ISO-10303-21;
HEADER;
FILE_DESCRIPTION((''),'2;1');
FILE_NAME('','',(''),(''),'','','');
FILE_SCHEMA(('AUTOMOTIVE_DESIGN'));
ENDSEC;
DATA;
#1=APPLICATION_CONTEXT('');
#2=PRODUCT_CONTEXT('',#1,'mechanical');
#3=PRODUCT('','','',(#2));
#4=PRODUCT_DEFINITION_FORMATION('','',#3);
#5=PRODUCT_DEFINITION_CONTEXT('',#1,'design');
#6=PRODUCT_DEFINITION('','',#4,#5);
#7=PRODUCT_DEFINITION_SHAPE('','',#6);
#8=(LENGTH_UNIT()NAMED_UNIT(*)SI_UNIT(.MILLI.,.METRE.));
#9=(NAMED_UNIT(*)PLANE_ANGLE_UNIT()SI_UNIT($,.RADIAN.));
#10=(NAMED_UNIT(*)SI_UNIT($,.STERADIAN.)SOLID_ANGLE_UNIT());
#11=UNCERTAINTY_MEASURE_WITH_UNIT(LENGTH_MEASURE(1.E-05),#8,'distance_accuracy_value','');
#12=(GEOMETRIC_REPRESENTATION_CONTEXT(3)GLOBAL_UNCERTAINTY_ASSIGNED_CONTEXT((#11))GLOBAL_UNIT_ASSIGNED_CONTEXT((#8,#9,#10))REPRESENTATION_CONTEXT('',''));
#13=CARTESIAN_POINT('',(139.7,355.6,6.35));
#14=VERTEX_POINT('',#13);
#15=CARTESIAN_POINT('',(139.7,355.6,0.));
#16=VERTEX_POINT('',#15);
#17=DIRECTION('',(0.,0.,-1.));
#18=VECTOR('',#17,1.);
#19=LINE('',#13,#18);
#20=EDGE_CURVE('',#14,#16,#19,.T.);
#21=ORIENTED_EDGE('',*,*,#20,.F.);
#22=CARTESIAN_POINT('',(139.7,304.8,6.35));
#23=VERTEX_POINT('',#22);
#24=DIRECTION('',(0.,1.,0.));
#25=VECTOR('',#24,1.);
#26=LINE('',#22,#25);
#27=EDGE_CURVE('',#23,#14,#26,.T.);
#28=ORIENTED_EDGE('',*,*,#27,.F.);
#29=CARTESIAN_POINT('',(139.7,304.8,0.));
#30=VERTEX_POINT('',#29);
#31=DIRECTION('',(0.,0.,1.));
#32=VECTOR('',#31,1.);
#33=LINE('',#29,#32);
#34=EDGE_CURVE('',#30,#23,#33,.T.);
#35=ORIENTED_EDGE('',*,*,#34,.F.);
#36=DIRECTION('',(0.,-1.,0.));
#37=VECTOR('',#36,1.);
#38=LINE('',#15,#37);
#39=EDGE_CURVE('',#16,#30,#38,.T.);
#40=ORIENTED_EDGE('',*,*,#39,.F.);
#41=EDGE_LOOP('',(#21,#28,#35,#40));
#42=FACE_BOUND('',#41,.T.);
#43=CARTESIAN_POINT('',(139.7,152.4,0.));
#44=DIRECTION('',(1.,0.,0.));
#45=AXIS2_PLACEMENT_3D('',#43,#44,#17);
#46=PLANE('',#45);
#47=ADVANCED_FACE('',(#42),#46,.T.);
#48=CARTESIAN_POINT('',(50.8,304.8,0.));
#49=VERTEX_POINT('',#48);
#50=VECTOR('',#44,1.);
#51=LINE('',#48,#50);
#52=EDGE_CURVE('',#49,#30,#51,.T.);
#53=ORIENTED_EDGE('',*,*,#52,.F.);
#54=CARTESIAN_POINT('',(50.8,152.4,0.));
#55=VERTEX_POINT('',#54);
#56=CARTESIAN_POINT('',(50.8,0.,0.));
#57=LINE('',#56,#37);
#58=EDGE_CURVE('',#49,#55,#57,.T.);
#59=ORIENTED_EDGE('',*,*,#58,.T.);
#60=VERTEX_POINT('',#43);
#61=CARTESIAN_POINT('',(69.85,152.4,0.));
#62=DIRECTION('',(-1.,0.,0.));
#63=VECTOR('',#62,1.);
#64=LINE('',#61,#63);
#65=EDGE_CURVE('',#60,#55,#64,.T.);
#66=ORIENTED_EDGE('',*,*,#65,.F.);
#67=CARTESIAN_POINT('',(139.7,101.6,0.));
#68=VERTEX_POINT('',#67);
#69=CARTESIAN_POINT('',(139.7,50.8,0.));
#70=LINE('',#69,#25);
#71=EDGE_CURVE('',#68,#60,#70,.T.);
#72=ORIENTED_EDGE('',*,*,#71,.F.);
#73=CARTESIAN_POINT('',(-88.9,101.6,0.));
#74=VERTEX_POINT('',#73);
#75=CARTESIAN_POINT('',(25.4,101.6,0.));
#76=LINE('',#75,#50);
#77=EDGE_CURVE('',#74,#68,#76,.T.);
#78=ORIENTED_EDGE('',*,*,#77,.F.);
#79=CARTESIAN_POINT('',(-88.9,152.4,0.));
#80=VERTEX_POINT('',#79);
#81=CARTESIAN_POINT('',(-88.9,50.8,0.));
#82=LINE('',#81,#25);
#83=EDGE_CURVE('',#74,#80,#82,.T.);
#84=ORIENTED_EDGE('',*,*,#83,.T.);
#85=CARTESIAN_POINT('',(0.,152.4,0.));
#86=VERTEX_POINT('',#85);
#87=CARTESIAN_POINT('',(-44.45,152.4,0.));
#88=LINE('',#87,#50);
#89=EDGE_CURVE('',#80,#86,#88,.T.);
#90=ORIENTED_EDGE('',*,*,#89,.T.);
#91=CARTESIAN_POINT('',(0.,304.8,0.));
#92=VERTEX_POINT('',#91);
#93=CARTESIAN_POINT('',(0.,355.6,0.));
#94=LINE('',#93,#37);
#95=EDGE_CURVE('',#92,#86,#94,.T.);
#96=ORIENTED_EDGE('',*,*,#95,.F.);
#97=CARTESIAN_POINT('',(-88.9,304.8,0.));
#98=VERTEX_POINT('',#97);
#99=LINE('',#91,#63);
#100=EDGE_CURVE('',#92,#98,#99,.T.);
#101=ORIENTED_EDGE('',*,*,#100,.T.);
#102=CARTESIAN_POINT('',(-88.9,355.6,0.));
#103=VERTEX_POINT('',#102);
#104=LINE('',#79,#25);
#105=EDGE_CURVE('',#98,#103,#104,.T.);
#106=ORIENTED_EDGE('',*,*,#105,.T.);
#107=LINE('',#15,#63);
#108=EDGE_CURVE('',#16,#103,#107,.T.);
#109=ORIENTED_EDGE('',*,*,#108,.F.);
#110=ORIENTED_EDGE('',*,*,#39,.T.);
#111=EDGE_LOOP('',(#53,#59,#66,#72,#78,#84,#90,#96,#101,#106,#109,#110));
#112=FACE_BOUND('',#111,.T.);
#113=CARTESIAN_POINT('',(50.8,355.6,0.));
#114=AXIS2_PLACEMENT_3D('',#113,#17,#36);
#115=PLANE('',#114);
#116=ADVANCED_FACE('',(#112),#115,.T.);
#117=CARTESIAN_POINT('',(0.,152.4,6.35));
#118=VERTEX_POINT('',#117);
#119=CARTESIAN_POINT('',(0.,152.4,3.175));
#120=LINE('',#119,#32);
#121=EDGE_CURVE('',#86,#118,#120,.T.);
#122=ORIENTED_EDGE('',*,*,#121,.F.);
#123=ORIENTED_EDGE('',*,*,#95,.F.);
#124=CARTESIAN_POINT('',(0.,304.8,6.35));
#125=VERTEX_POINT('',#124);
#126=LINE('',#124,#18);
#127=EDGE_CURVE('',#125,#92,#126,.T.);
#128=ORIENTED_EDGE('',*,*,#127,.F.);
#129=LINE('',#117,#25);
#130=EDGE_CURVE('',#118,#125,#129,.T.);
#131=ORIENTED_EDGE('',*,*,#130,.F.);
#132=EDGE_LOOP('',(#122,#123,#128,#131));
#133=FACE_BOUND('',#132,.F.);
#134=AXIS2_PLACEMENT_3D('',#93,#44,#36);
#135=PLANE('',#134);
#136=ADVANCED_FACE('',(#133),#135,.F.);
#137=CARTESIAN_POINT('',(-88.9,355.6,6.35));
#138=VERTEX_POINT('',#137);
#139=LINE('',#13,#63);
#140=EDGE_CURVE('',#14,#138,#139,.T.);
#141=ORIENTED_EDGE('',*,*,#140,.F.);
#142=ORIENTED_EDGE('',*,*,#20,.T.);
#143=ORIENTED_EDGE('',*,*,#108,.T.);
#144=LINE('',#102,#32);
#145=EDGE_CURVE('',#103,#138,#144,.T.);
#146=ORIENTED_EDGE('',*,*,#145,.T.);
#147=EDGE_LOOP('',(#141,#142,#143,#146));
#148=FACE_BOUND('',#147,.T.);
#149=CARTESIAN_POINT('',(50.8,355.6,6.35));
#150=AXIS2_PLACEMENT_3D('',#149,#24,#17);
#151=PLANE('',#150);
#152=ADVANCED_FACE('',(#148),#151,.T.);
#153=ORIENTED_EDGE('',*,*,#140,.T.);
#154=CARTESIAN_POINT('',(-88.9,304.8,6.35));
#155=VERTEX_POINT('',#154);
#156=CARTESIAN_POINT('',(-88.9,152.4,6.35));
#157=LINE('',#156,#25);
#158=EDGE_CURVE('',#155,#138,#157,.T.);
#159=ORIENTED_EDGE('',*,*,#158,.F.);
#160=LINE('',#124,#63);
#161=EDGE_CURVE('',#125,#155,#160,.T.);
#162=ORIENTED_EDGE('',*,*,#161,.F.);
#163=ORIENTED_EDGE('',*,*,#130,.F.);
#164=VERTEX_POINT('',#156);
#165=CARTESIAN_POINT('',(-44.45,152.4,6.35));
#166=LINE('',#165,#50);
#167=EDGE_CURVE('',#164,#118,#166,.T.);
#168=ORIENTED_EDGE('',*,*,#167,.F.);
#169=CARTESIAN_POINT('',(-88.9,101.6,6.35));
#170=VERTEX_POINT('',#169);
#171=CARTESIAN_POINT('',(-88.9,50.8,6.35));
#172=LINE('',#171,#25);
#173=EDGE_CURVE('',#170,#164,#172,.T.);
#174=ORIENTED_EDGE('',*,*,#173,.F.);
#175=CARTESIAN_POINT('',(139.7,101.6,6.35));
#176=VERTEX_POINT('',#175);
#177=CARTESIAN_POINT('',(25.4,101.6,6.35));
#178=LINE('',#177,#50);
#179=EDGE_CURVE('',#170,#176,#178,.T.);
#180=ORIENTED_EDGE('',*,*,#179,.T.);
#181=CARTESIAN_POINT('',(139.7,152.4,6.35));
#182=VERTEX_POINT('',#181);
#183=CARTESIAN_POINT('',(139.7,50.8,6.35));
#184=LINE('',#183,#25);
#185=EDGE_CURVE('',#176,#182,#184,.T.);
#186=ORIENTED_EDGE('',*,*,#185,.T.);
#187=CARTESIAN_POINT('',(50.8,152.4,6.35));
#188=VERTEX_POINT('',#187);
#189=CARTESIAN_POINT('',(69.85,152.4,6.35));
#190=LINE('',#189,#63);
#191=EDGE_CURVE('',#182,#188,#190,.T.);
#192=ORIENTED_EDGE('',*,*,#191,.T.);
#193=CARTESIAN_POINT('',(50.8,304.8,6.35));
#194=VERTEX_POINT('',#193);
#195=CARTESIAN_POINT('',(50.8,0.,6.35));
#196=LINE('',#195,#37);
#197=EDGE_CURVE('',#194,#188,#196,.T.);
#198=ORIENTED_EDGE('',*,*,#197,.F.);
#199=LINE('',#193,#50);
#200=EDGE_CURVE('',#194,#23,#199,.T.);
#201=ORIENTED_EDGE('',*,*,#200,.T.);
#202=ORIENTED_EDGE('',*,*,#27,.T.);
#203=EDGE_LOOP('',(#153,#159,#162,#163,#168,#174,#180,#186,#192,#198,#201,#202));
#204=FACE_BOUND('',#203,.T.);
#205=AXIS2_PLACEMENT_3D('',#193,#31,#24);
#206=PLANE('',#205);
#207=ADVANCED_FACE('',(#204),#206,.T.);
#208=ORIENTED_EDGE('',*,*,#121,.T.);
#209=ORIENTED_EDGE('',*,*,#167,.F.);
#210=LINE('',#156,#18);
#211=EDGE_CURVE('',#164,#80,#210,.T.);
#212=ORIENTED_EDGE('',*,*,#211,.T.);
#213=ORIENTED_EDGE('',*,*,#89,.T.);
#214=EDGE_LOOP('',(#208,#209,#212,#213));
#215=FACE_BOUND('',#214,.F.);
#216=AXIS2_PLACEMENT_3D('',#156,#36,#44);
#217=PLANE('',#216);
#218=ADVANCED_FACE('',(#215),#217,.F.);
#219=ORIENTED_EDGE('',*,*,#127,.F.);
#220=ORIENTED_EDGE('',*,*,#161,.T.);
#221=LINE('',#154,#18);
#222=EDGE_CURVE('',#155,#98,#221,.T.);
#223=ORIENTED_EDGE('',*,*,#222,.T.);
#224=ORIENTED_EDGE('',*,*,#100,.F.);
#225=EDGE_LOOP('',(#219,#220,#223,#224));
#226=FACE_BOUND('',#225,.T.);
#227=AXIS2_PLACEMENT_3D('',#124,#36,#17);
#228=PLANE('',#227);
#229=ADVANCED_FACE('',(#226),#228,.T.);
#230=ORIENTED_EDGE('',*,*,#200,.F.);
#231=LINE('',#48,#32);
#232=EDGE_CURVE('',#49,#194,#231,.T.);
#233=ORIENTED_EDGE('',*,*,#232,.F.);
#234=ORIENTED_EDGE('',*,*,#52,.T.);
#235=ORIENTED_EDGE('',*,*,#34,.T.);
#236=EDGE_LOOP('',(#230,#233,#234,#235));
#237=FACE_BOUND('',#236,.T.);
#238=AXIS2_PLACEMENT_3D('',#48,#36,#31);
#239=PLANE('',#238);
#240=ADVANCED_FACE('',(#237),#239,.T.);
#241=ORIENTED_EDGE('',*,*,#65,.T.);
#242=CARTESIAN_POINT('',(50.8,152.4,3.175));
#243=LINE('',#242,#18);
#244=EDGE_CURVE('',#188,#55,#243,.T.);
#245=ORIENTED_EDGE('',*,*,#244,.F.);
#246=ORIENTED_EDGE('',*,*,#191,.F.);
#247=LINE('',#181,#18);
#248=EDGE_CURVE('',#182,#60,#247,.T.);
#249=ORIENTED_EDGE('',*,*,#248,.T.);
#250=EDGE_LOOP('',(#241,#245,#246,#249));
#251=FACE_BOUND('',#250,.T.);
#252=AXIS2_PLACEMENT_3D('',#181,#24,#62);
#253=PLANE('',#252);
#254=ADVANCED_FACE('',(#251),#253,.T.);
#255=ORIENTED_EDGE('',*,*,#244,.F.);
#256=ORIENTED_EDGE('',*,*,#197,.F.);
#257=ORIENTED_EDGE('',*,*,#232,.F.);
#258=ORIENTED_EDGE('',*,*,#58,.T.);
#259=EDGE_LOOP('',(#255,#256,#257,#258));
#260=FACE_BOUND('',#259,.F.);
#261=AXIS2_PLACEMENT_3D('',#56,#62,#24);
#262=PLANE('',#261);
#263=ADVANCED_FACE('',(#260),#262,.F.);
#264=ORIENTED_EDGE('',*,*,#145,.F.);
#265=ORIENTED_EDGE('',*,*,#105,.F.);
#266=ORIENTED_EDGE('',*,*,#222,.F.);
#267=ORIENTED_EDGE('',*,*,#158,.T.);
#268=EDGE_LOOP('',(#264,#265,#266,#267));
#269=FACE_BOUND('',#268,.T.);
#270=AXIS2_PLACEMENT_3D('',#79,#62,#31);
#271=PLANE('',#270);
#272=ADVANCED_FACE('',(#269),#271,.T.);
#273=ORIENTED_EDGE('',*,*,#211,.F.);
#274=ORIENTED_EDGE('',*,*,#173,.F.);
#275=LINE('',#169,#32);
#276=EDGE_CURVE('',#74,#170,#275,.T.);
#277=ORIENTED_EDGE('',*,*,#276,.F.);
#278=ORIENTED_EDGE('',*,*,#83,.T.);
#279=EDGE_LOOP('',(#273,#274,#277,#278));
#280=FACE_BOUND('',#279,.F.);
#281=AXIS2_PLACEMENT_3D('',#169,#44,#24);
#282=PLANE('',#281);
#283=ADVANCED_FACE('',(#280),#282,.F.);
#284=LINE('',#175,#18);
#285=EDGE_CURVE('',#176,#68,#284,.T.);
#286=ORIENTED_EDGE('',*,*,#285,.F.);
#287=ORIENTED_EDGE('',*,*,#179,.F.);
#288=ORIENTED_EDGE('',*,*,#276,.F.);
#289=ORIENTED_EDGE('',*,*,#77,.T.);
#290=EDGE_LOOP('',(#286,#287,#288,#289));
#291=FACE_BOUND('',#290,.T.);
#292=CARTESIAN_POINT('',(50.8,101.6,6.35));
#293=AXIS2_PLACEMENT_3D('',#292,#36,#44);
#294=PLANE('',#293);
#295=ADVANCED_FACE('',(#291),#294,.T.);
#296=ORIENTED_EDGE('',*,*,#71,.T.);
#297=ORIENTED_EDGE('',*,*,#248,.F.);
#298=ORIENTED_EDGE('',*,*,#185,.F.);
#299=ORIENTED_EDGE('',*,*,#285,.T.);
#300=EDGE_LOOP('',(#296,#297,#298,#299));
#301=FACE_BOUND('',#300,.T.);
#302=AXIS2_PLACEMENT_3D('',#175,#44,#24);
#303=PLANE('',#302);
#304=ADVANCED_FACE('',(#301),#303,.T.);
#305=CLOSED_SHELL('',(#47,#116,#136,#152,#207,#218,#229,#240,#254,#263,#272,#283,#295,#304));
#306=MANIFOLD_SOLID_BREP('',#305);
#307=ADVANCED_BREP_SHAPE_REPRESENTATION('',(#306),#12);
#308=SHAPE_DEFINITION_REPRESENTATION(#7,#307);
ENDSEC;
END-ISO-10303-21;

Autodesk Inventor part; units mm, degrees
ref_plane "YZ Plane" through (0, 0, 0) normal (1, 0, 0) x (0, 1, 0)
ref_plane "XZ Plane" through (0, 0, 0) normal (0, 1, 0) x (-1, 0, 0)
ref_plane "XY Plane" through (0, 0, 0) normal (0, 0, 1) x (1, 0, 0)
sketch "Sketch1" plane through (0, 0, 0) normal (0, 0, 1) x (1, 0, 0)
  line L0 (0, 0) -> (50.8, 0)
  line L1 (50.8, 0) -> (50.8, 355.6)
  line L2 (50.8, 355.6) -> (0, 355.6)
  line L3 (0, 355.6) -> (0, 0)
  dimension "d0" = 50.8
  dimension "d1" = 355.6
extrude "Extrusion1" add sketch "Sketch1" along normal blind 6.35
sketch "Sketch2" plane through (0, 0, 6.35) normal (0, 0, 1) x (1, 0, 0)
  line L0 (50.8, 0) -> (50.8, 355.6) projected
  line L1 (50.8, 152.4) -> (50.8, 203.2)
  line L2 (0, 152.4) -> (0, 203.2)
  line L3 (0, 355.6) -> (0, 0) projected
  line L4 (-88.9, 254) -> (0, 254)
  line L5 (0, 254) -> (0, 203.2)
  line L6 (0, 203.2) -> (-88.9, 203.2)
  line L7 (-88.9, 203.2) -> (-88.9, 254)
  line L8 (-88.9, 152.4) -> (0, 152.4)
  line L9 (0, 152.4) -> (0, 101.6)
  line L10 (0, 101.6) -> (-88.9, 101.6)
  line L11 (-88.9, 101.6) -> (-88.9, 152.4)
  line L12 (50.8, 101.6) -> (139.7, 101.6)
  line L13 (139.7, 101.6) -> (139.7, 152.4)
  line L14 (139.7, 152.4) -> (50.8, 152.4)
  line L15 (50.8, 152.4) -> (50.8, 101.6)
  line L16 (139.7, 203.2) -> (50.8, 203.2)
  line L17 (50.8, 203.2) -> (50.8, 254)
  line L18 (50.8, 254) -> (139.7, 254)
  line L19 (139.7, 254) -> (139.7, 203.2)
  point P0 (50.8, 152.4)
  point P1 (-88.9, 107.5788)
  point P2 (0, 254)
extrude "Extrusion3" add sketch "Sketch2" against normal blind 6.35
thicken "Thicken1" operation add thickness 101.6 both sides no extend neighbours yes toward (0, 1, 0) faces at (16.9333, 0, 2.1167)
thicken "Thicken2" operation add thickness 88.9 both sides no extend neighbours yes toward (-1, 0, 0) faces at (139.7, 220.1333, 2.1167)
thicken "Thicken3" operation add thickness 88.9 both sides no extend neighbours yes toward (1, 0, 0) faces at (-88.9, 237.0667, 2.1167)
sketch "Sketch3" plane through (0, 152.4, 0) normal (-1, 0, 0) x (0, 0, 1)
  line L0 (0, 203.2) -> (6.35, 203.2) projected
  line L1 (0, 0) -> (0, 203.2) projected
  line L2 (6.35, 0) -> (6.35, 203.2) projected
  line L3 (0, 203.2) -> (6.35, 203.2)
  line L4 (6.35, 203.2) -> (6.35, 152.4)
  line L5 (6.35, 152.4) -> (0, 152.4)
  line L6 (0, 152.4) -> (0, 203.2)
  point P0 (0, -152.4)
extrude "Extrusion4" add sketch "Sketch3" along normal blind 88.9
sketch "Sketch4" plane through (50.8, 152.4, 0) normal (1, 0, 0) x (0, 0, -1)
  line L0 (-6.35, 152.4) -> (-6.35, 203.2) projected
  line L1 (0, 152.4) -> (0, 0) projected
  line L2 (-6.35, 203.2) -> (0, 203.2)
  line L3 (0, 203.2) -> (0, 152.4)
  line L4 (0, 152.4) -> (-6.35, 152.4)
  line L5 (-6.35, 152.4) -> (-6.35, 203.2)
  point P0 (0, -152.4)
extrude "Extrusion5" add sketch "Sketch4" along normal blind 88.9
properties part number "backplatelift"
